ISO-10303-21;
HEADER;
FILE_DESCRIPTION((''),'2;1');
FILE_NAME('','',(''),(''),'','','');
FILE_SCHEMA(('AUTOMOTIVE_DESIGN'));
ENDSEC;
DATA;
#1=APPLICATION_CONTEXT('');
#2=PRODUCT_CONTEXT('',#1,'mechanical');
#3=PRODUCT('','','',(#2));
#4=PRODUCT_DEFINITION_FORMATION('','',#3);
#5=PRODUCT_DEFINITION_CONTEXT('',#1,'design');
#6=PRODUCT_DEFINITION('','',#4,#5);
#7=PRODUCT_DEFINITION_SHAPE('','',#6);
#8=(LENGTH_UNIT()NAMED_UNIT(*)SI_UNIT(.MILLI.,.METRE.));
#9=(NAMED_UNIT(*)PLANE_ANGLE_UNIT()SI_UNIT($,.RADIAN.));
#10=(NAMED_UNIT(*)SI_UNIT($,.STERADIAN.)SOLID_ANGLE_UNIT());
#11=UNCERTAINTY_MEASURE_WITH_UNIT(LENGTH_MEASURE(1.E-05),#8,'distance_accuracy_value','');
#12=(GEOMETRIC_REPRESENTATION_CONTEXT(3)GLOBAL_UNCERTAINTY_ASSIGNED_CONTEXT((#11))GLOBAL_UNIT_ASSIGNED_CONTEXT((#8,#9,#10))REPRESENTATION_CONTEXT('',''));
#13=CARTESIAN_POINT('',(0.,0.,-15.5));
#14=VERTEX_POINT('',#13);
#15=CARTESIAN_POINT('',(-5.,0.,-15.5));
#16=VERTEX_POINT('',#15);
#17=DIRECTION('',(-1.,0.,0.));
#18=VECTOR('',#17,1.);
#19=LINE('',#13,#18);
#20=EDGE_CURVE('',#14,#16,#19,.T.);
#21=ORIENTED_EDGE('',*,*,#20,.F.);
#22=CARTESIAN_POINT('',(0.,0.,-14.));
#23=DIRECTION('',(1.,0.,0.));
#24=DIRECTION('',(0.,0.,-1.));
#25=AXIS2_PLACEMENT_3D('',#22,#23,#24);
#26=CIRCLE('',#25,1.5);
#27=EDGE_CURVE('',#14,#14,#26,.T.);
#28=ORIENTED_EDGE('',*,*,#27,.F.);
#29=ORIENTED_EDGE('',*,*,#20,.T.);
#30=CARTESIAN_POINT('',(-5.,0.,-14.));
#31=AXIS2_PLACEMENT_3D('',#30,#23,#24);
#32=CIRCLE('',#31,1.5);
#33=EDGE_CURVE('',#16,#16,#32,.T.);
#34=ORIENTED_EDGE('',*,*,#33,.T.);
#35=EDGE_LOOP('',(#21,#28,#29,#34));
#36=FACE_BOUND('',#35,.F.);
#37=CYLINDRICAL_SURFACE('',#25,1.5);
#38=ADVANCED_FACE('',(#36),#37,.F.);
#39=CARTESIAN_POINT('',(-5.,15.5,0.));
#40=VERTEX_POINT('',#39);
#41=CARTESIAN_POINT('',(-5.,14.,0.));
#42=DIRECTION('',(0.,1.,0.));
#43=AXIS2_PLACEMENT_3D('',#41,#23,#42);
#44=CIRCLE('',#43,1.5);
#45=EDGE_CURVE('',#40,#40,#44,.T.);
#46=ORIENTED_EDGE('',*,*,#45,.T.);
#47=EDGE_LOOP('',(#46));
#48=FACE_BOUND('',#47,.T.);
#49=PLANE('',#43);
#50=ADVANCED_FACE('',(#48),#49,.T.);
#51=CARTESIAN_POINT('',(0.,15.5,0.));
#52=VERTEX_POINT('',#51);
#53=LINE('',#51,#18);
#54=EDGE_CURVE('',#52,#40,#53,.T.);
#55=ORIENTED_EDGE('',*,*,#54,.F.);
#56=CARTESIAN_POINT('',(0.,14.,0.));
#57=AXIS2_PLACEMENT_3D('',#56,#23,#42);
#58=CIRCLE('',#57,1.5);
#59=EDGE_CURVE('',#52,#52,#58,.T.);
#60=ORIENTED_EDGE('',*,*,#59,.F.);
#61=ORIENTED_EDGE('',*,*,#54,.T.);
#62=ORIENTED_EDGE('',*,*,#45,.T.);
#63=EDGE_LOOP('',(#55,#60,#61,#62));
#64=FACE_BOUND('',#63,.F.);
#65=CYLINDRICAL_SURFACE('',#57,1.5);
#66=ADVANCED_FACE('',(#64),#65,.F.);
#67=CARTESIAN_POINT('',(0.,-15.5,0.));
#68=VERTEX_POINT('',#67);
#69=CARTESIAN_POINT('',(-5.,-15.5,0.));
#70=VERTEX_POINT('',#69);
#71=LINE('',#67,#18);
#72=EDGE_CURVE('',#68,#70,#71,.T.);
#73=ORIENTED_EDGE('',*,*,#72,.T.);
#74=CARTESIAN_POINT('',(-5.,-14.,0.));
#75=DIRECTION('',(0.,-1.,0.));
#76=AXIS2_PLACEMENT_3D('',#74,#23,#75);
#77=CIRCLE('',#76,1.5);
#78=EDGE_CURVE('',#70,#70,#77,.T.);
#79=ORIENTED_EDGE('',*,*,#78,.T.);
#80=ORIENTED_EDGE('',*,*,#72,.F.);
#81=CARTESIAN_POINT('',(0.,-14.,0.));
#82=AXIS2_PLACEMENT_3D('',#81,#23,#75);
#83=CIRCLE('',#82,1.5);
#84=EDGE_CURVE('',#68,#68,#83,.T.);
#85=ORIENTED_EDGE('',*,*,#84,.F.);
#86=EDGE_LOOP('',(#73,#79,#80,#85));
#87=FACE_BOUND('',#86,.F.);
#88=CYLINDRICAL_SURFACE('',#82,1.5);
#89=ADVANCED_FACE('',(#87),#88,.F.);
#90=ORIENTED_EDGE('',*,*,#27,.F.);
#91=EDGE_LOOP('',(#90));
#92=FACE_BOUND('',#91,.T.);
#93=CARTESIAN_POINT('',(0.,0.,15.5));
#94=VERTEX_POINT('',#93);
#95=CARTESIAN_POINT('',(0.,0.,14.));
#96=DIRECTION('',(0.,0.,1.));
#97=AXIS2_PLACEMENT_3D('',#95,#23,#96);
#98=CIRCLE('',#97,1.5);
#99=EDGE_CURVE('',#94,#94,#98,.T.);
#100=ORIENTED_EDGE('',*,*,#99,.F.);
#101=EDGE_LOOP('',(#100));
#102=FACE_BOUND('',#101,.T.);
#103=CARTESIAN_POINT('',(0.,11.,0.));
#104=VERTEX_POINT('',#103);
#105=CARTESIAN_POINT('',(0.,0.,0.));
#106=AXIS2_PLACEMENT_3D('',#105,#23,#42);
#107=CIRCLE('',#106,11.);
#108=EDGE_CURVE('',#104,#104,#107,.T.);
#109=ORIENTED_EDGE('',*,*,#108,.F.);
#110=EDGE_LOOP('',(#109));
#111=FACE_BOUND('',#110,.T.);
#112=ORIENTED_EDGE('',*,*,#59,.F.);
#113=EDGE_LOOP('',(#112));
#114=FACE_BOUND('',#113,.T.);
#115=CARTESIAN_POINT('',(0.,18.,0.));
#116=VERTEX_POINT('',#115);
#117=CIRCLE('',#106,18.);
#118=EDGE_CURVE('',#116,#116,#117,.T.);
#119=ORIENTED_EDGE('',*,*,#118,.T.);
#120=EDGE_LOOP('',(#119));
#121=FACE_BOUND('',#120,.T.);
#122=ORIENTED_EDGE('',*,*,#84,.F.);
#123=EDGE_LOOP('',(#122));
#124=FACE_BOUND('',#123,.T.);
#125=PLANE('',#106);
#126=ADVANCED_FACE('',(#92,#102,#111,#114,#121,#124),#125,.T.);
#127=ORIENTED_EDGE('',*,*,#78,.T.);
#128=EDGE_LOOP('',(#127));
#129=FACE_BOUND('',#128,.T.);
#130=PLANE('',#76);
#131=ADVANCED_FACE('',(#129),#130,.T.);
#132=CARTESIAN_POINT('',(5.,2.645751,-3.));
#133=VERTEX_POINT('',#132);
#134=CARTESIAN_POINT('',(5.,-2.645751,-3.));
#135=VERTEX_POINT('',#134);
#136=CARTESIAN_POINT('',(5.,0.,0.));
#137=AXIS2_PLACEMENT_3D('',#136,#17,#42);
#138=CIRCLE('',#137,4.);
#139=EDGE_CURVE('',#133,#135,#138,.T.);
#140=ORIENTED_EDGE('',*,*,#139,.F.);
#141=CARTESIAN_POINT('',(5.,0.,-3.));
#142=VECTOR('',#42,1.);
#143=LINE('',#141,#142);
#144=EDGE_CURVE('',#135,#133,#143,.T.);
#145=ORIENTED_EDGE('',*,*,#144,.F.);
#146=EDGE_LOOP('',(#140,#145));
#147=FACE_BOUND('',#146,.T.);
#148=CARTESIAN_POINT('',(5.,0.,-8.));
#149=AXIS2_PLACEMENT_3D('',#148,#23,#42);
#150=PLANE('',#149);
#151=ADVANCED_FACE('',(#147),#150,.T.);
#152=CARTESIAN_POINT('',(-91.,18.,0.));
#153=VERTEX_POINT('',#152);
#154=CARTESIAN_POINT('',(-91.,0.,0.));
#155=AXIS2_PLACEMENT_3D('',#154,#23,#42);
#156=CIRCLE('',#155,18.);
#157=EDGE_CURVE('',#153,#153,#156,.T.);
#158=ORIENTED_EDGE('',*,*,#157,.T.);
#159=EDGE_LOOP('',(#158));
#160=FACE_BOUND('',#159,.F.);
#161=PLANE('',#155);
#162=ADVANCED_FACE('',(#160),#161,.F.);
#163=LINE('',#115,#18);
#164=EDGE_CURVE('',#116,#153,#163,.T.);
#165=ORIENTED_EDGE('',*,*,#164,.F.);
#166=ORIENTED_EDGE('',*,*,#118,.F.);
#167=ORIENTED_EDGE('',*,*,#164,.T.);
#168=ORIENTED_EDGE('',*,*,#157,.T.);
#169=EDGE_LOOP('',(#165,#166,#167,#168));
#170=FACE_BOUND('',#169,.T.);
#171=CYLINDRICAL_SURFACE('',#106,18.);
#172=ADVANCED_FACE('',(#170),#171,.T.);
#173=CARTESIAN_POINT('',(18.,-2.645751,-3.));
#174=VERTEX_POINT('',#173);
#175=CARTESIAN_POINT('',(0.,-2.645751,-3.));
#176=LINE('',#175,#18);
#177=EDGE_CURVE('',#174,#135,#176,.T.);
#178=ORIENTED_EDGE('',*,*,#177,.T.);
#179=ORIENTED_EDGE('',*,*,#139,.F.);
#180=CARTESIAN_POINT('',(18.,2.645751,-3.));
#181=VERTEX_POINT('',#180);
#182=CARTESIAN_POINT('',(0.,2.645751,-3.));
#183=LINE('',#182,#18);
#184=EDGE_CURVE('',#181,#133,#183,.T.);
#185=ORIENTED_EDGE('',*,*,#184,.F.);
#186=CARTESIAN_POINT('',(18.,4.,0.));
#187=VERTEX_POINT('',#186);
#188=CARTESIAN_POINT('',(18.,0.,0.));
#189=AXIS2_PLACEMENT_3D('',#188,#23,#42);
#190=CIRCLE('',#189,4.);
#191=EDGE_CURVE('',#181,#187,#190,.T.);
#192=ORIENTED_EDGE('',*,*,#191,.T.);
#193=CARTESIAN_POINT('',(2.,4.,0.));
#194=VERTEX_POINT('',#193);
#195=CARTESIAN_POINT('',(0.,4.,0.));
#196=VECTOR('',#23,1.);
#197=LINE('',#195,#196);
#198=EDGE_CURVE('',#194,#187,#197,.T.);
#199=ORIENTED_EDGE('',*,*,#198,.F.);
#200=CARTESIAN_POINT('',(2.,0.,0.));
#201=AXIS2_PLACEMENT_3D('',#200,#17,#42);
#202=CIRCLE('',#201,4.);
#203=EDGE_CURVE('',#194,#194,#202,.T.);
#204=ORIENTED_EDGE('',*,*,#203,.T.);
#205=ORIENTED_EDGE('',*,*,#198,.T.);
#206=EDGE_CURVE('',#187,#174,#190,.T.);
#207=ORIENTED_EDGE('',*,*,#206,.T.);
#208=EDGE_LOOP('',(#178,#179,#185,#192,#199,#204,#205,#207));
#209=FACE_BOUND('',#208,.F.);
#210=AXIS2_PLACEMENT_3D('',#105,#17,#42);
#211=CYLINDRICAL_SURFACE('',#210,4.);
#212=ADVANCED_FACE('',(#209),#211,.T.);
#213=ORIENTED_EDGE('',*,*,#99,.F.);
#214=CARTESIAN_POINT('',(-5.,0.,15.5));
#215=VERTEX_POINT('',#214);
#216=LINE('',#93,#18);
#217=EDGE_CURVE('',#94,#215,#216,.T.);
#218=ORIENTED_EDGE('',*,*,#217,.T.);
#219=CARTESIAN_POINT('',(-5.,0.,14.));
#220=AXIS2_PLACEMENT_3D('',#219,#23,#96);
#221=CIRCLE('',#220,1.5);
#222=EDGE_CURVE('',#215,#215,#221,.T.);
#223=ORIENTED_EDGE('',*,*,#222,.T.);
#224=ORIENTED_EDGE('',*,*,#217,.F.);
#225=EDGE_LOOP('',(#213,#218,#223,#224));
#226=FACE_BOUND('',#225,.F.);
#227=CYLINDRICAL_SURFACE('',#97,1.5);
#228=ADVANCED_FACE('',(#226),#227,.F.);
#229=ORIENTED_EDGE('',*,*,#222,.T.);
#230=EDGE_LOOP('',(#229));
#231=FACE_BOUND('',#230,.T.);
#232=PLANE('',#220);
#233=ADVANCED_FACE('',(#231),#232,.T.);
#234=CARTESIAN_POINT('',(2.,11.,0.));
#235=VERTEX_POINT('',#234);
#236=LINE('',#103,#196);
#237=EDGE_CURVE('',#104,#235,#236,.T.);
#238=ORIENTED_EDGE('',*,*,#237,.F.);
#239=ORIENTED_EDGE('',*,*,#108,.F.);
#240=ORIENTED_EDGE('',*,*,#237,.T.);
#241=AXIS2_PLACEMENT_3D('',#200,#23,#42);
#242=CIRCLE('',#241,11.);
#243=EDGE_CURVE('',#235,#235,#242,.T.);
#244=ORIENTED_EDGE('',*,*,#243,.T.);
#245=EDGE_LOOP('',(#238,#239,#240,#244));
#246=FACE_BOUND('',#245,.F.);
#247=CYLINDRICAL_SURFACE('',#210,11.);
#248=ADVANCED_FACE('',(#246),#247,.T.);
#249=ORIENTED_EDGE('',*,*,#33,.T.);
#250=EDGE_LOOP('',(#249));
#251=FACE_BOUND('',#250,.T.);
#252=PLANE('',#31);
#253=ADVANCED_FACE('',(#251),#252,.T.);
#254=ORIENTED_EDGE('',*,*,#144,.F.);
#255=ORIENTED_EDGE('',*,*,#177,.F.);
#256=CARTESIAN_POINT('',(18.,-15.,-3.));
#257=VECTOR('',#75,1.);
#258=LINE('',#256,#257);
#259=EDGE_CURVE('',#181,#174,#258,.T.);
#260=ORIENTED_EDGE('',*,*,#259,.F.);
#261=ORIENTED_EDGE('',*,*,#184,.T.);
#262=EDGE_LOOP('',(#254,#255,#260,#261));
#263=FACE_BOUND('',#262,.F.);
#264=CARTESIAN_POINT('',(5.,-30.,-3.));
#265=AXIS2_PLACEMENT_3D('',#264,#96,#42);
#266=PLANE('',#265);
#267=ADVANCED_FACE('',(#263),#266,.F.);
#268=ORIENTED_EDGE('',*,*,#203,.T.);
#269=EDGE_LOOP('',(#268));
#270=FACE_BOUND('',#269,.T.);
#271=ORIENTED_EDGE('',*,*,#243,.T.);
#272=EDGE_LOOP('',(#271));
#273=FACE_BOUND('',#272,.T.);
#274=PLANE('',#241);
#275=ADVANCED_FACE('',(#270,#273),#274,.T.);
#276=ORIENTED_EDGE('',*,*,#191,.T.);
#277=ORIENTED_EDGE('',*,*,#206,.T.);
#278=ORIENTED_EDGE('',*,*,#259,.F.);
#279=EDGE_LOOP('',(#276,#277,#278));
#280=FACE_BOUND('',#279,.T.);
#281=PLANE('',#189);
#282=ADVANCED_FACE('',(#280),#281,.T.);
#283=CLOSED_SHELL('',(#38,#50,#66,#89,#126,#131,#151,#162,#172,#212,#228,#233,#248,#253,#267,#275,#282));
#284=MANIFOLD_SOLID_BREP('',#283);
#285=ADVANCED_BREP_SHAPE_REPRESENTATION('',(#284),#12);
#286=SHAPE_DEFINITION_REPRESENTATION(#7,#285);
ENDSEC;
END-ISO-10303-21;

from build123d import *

# Parameters (mm, degrees)
F0_R            = 18
F1_DEPTH        = 91
F2_R            = 11
F3_DEPTH        = 2
F4_R            = 4
F5_DEPTH        = 18
F6_R            = 1.5
F7_DEPTH        = 5
F7_COPIES_COUNT = 4
F9_START        = 5
F8_W            = 60
F8_H            = 10
F9_DEPTH        = 20


# Not quite as in the source:
# - a pattern or mirror of a feature is missing from the dataset's text; its kind, count and spacing are read off the source's solid


with BuildPart() as f1:
    # F0 (on Right) → F1 (new body)
    with BuildSketch(Plane.YZ):
        Circle(F0_R)
    extrude(amount=-F1_DEPTH)

    # F2 (on Right) → F3 (join)
    with BuildSketch(Plane.YZ):
        Circle(F2_R)
    extrude(amount=F3_DEPTH)

    # F4 (on Right) → F5 (join)
    with BuildSketch(Plane.YZ):
        Circle(F4_R)
    extrude(amount=F5_DEPTH)

    # F6 (on Right) → F7 (cut)
    with BuildSketch(Plane.YZ):
        with Locations((14, 0)):
            Circle(F6_R)
    f7 = extrude(amount=-F7_DEPTH, mode=Mode.SUBTRACT)

    # F7_copies: F7 ×4 about axis
    f7_copies_axis = Axis((0, 0, 0), (1, 0, 0))
    for i in range(1, F7_COPIES_COUNT):
        add(f7.rotate(f7_copies_axis, i * 360 / F7_COPIES_COUNT), mode=Mode.SUBTRACT)

    # F8 (on Right) → F9 (cut)
    with BuildSketch(Plane.YZ.offset(F9_START)):
        with Locations((0, -8)):
            Rectangle(F8_W, F8_H)
    extrude(amount=F9_DEPTH, mode=Mode.SUBTRACT)


solid = f1.part
